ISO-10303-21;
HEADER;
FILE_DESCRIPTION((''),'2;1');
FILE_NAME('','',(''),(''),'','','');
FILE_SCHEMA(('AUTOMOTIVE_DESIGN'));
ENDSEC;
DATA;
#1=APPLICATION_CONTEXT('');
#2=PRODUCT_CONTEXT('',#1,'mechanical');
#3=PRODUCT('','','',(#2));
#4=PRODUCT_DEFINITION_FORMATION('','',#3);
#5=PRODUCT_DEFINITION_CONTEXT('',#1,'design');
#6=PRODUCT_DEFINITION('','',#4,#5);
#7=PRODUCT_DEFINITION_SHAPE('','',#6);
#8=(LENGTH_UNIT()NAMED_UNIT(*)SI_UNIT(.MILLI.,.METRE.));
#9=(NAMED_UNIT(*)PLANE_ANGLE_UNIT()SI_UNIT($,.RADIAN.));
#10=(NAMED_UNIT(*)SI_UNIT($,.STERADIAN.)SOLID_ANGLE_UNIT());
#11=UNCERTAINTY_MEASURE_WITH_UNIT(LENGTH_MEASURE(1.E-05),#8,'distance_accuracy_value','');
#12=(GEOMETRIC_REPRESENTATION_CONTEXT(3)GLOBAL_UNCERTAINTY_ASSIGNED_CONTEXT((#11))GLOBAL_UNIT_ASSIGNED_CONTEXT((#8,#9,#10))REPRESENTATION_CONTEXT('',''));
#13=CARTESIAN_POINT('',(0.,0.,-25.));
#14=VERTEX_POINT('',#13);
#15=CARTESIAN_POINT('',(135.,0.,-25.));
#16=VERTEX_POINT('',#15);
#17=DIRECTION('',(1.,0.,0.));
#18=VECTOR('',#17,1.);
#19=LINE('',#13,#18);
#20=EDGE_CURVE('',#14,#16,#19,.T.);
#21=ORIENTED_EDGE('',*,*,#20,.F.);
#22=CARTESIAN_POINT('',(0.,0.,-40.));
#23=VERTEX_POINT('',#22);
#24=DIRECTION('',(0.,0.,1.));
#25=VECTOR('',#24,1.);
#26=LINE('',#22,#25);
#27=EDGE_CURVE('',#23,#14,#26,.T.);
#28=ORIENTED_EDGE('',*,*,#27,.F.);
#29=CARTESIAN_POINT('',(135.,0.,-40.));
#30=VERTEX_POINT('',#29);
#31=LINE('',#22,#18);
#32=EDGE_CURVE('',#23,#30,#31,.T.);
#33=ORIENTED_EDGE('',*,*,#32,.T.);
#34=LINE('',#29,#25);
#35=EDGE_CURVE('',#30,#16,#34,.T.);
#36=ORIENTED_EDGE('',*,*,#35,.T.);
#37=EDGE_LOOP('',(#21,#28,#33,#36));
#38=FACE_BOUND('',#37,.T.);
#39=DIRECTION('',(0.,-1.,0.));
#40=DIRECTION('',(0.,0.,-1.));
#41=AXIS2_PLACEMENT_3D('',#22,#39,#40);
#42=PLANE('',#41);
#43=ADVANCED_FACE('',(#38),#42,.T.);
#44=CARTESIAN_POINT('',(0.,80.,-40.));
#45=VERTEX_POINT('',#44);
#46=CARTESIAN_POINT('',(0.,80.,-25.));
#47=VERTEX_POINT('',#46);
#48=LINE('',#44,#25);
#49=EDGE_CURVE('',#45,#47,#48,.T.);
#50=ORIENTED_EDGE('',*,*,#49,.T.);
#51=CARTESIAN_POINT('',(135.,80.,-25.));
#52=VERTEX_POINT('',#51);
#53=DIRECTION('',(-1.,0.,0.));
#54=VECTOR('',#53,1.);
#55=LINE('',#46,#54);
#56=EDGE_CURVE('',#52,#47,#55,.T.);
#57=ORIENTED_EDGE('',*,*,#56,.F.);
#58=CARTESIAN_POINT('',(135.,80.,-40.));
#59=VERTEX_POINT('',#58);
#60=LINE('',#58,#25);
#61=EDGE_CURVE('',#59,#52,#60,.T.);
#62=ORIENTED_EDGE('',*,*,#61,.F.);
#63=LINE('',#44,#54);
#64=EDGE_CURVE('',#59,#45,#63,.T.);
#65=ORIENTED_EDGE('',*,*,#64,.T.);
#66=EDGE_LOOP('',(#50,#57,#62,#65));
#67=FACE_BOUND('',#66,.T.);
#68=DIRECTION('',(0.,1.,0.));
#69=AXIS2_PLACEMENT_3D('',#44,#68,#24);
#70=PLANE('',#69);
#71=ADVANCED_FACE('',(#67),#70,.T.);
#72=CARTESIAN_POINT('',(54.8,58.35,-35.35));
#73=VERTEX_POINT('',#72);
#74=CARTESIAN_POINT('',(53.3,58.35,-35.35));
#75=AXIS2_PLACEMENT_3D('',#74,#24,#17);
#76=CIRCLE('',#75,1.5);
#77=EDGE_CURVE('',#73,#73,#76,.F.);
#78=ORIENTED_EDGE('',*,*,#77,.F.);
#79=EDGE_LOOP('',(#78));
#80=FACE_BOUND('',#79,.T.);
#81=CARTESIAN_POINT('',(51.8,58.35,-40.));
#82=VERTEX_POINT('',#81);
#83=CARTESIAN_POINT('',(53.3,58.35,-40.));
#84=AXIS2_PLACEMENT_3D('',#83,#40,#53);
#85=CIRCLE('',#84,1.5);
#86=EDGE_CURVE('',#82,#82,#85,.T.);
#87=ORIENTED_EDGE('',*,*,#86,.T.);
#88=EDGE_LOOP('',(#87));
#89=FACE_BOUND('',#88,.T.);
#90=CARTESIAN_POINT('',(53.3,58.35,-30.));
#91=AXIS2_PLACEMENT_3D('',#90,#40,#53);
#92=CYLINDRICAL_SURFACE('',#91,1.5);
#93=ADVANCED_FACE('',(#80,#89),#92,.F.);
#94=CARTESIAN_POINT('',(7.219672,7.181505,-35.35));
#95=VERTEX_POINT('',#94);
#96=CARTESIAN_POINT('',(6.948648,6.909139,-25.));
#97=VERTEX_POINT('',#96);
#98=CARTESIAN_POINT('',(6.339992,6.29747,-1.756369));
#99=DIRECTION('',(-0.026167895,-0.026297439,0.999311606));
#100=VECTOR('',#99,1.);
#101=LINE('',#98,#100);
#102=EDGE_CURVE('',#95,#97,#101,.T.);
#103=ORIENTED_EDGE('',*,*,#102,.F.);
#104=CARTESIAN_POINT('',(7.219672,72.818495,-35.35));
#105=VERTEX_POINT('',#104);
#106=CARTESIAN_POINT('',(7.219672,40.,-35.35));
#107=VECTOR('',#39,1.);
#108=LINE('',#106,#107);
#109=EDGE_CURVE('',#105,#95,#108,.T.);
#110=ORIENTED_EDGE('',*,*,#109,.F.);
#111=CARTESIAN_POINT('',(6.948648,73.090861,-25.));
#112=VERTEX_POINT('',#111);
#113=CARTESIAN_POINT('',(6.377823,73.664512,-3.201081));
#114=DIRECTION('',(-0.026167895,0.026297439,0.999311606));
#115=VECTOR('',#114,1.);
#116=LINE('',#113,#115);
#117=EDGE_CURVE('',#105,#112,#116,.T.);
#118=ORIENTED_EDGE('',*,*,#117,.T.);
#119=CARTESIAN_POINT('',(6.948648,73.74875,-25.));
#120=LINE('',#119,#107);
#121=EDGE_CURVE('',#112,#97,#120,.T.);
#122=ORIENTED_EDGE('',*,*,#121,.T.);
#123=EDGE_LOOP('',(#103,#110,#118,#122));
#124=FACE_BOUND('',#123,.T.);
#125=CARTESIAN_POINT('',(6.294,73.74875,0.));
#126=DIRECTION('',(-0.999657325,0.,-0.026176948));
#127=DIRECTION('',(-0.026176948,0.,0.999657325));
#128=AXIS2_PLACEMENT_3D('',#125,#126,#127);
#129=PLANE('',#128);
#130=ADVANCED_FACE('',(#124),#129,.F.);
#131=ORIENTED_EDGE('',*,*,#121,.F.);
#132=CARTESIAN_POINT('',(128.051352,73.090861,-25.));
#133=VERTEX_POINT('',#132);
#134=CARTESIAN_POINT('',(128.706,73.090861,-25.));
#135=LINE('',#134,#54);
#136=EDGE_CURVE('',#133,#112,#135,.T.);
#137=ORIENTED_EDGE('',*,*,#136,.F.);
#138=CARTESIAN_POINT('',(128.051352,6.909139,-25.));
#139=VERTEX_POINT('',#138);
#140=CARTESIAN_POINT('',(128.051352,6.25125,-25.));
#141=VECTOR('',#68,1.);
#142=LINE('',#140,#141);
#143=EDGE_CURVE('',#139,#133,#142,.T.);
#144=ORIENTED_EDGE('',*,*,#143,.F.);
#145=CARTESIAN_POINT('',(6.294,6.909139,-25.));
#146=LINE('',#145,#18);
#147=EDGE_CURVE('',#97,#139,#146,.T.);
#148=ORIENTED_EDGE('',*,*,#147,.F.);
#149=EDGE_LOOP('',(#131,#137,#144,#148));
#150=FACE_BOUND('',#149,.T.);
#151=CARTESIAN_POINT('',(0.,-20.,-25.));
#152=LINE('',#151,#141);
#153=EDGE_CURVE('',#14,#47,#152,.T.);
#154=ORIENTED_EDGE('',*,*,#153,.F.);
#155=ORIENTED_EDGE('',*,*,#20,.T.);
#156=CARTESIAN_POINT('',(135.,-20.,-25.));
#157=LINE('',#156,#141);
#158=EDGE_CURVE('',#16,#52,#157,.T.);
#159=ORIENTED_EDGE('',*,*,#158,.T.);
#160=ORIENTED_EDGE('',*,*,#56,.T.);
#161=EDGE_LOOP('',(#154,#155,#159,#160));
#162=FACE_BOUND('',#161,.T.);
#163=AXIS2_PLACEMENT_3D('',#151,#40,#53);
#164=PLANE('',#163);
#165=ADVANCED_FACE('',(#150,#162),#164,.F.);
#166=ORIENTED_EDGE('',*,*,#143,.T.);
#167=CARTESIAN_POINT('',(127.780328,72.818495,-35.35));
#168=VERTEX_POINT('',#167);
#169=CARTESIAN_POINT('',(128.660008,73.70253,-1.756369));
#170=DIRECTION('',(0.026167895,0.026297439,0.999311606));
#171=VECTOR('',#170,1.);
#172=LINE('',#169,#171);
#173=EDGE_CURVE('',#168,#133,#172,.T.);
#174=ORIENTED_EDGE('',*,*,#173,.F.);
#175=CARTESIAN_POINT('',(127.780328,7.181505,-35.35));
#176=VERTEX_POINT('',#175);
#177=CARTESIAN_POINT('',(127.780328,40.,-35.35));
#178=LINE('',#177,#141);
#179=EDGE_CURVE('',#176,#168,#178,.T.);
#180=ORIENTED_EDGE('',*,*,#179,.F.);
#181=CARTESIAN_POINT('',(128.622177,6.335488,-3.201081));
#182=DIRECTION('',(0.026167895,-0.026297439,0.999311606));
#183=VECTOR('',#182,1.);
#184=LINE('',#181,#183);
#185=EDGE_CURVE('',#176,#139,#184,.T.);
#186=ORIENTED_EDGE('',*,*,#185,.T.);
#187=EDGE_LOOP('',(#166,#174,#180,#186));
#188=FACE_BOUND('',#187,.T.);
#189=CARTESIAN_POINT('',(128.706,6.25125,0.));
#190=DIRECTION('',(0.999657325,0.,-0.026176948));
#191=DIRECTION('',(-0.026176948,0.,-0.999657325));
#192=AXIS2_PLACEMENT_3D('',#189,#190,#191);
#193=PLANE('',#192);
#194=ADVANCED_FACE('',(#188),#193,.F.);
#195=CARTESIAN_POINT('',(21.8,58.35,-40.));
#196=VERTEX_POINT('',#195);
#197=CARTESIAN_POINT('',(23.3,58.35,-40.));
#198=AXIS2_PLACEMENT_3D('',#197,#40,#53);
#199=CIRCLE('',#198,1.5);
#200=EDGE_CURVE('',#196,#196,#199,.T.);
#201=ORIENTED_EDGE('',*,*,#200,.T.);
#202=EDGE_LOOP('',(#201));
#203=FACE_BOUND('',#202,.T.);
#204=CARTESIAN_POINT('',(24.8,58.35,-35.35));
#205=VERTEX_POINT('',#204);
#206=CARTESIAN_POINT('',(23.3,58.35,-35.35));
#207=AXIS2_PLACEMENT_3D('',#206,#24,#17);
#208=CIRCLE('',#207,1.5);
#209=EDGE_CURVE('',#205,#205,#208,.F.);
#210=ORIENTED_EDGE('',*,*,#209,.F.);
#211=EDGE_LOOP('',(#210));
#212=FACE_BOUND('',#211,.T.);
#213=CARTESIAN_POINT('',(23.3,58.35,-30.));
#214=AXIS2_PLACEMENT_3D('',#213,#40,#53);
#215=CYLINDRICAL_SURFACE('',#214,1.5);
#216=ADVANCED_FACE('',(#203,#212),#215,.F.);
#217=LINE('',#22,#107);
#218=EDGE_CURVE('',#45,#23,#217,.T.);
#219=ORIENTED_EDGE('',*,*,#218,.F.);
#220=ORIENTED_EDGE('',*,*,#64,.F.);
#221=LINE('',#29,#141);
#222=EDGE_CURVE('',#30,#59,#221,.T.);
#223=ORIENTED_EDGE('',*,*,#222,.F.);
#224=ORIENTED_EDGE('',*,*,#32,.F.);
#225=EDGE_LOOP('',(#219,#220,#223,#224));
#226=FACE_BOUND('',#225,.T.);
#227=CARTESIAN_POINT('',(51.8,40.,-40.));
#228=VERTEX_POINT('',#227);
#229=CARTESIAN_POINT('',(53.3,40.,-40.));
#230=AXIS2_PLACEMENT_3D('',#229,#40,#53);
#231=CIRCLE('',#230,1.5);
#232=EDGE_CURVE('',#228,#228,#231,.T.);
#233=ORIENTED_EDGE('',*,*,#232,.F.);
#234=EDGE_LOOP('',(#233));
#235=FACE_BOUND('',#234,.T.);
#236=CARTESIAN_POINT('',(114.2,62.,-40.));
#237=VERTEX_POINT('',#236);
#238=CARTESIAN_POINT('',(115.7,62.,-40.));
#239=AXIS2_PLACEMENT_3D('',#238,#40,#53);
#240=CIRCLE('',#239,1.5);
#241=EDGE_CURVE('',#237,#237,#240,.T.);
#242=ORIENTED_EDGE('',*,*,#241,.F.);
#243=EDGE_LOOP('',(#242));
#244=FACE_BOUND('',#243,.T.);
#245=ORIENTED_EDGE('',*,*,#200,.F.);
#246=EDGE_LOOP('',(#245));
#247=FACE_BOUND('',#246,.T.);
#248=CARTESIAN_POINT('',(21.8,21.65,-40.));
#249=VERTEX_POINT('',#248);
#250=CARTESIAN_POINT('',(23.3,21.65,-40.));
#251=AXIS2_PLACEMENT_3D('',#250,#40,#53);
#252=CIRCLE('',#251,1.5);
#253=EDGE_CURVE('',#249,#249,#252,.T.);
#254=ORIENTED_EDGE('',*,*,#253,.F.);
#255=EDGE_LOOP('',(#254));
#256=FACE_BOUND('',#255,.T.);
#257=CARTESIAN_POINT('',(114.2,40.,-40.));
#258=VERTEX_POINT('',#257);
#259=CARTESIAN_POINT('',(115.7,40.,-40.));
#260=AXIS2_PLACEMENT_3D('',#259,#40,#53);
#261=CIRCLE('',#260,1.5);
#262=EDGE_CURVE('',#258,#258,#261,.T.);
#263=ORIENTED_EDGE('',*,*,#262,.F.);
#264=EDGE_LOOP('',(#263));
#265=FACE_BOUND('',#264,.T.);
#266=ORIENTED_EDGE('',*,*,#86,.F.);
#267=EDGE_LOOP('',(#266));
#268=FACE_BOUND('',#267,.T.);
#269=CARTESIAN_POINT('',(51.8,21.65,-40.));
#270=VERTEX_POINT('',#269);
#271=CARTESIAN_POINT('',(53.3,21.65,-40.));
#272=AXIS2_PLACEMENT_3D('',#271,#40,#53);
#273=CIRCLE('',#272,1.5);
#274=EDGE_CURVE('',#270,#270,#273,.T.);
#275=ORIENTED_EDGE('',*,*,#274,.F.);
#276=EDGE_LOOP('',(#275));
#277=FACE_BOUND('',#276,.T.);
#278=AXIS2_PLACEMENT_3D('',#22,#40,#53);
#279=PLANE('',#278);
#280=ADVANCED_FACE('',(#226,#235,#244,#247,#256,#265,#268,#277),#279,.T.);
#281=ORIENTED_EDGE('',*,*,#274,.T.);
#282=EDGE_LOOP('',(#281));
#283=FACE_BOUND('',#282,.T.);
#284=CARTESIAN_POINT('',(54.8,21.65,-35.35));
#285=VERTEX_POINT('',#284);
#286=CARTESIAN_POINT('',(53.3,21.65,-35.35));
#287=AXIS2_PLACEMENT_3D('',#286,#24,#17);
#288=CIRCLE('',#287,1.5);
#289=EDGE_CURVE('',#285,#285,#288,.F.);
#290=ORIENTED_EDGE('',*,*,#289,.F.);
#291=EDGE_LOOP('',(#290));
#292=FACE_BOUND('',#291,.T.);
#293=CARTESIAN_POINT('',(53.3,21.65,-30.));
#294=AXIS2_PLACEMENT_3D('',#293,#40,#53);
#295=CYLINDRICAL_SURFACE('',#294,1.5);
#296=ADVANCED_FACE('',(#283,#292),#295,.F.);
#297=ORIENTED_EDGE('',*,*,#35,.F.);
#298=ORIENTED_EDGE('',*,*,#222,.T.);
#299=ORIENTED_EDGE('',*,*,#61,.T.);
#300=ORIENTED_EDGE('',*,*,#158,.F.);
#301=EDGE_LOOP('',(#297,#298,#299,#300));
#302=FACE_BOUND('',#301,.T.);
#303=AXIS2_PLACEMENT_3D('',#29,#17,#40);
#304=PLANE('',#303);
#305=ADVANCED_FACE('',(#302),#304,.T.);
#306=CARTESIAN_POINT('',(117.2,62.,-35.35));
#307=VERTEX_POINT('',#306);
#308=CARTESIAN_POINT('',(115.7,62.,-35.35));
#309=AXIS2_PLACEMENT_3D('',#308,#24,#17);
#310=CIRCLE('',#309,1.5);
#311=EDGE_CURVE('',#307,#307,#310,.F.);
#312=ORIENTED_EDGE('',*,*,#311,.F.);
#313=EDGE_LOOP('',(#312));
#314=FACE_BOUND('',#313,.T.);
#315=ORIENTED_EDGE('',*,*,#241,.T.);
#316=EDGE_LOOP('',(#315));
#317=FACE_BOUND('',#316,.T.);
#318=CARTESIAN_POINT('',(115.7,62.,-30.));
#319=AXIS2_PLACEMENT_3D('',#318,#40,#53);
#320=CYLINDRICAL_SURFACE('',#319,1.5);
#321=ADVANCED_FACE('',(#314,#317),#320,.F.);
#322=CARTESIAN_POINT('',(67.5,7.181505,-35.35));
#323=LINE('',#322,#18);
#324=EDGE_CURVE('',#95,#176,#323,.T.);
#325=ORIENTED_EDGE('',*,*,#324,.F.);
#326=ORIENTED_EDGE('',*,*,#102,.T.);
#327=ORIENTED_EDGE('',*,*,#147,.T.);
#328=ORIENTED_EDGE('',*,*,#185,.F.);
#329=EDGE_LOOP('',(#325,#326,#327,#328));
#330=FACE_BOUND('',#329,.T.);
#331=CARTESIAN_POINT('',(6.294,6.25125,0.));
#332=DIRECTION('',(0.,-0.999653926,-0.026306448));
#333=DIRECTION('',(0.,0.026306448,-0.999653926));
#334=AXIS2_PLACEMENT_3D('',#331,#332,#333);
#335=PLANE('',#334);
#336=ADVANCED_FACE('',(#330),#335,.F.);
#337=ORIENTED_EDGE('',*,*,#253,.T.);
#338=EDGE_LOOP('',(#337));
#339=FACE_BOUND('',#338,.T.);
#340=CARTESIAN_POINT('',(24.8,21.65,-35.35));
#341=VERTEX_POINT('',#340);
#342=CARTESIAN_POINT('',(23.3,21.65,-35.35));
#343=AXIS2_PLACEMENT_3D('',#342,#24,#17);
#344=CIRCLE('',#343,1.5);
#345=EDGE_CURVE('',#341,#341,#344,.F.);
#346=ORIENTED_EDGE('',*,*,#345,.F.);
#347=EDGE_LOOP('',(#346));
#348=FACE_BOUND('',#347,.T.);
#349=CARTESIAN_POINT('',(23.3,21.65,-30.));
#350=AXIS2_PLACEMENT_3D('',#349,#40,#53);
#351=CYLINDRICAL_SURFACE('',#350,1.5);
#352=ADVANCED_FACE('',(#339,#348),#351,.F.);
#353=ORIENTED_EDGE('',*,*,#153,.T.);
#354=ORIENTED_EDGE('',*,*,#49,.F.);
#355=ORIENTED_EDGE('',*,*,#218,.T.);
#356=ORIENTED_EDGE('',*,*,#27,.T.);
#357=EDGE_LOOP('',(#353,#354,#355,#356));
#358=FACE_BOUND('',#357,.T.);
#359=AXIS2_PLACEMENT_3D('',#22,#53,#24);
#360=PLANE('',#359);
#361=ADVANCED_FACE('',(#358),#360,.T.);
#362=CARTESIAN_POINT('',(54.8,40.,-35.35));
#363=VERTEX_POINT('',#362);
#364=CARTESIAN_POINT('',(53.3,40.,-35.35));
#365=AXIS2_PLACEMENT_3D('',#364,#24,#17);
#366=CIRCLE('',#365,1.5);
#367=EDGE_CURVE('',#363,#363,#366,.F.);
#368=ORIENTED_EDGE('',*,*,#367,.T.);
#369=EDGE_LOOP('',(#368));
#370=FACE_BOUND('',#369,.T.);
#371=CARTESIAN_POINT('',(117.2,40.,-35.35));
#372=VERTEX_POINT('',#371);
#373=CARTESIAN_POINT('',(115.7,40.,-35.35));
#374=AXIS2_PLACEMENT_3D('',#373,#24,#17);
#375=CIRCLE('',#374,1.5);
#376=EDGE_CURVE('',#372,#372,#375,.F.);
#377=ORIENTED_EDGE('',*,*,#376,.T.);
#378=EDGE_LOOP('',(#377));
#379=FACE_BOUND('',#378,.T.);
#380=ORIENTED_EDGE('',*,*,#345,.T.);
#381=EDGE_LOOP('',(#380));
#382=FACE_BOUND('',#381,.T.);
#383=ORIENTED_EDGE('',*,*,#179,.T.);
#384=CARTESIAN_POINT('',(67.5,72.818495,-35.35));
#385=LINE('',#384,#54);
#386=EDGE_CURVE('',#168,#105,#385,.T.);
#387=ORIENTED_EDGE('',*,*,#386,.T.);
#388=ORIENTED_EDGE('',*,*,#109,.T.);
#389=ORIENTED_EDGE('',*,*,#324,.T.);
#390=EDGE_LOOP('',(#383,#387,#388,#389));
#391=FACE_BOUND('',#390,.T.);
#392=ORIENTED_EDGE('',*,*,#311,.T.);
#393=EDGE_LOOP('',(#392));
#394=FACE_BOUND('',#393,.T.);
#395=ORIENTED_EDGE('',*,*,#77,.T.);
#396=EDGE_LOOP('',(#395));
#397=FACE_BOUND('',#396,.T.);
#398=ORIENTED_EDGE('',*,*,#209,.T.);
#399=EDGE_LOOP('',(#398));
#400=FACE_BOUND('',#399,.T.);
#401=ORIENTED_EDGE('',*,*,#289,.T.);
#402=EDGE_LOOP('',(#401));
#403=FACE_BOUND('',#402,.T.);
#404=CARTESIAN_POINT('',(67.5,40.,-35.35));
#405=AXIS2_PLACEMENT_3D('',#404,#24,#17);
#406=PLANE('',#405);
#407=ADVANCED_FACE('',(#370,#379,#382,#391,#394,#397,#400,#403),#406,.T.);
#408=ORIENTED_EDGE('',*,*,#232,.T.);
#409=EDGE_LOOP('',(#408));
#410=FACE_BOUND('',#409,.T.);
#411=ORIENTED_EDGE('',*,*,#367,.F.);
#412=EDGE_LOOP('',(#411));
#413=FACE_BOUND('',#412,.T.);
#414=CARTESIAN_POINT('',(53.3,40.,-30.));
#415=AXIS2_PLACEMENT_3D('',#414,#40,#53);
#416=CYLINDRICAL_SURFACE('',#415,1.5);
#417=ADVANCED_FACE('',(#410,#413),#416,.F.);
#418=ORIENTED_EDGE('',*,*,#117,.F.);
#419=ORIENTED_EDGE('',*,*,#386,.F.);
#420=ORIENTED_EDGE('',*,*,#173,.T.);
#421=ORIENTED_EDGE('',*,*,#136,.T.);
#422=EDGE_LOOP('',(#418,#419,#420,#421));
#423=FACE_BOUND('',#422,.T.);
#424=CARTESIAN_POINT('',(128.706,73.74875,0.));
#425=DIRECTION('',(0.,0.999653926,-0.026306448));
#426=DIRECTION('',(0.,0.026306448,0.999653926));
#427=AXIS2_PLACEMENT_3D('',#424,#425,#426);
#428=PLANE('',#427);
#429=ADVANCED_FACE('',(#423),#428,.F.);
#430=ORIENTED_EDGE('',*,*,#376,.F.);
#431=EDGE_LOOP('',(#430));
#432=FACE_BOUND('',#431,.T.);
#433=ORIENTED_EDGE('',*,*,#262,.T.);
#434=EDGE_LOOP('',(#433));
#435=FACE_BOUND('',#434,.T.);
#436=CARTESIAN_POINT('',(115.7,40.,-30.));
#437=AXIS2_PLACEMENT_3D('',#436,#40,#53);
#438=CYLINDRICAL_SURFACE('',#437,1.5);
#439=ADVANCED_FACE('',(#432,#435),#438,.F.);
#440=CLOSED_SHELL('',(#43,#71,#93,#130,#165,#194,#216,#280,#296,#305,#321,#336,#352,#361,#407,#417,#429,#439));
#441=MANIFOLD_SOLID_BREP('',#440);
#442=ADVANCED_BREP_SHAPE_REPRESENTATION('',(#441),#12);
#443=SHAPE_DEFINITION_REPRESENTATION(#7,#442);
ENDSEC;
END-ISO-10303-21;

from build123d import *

# Parameters (mm, degrees)
SKETCH1_W           = 135
SKETCH1_H           = 80
BOSS_EXTRUDE1_DEPTH = 40
SKETCH2_R           = 1.5
CUT_EXTRUDE1_DEPTH  = 10
SKETCH4_W           = 135
SKETCH4_H           = 25
CUT_EXTRUDE2_DEPTH  = 100


with BuildPart() as part:
    # Sketch1 → Boss-Extrude1 (new body)
    with BuildSketch(Plane.XY):
        with Locations((67.5, 40)):
            Rectangle(SKETCH1_W, SKETCH1_H)
    extrude(amount=-BOSS_EXTRUDE1_DEPTH)

    # Sketch2 → Cut-Extrude1 (cut)
    with BuildSketch(Plane(origin=(0, 0, -40), x_dir=(-1, 0, 0), z_dir=(0, 0, -1))):
        with Locations((-53.3, 40)):
            Circle(SKETCH2_R)
        with Locations((-53.3, 58.35)):
            Circle(SKETCH2_R)
        with Locations((-53.3, 21.65)):
            Circle(SKETCH2_R)
        with Locations((-23.3, 58.35)):
            Circle(SKETCH2_R)
        with Locations((-23.3, 21.65)):
            Circle(SKETCH2_R)
        with Locations((-115.7, 40)):
            Circle(SKETCH2_R)
        with Locations((-115.7, 62)):
            Circle(SKETCH2_R)
    extrude(amount=-CUT_EXTRUDE1_DEPTH, mode=Mode.SUBTRACT)

    # Cavity1: read off the stored shape, not the designer's step
    # Cavity1: loft between two sections, ruled curve by curve
    cavity1_from = [
        Edge.make_line((128.706, 6.25125, 0), (128.706, 73.74875, 0)),
        Edge.make_line((6.294, 6.25125, 0), (128.706, 6.25125, 0)),
        Edge.make_line((6.294, 73.74875, 0), (6.294, 6.25125, 0)),
        Edge.make_line((128.706, 73.74875, 0), (6.294, 73.74875, 0)),
    ]
    cavity1_to = [
        Edge.make_line((127.780327673, 7.181504864, -35.35), (127.780327673, 72.818495136, -35.35)),
        Edge.make_line((7.219672327, 7.181504864, -35.35), (127.780327673, 7.181504864, -35.35)),
        Edge.make_line((7.219672327, 72.818495136, -35.35), (7.219672327, 7.181504864, -35.35)),
        Edge.make_line((127.780327673, 72.818495136, -35.35), (7.219672327, 72.818495136, -35.35)),
    ]
    cavity1 = Solid(Shell([*[Face.make_surface_from_curves(cavity1_from[k], cavity1_to[k]) for k in range(4)], Face(Wire(cavity1_from)), Face(Wire(cavity1_to))]))
    add(cavity1, mode=Mode.SUBTRACT)

    # Sketch4 → Cut-Extrude2 (cut)
    with BuildSketch(Plane(origin=(0, 80, 0), x_dir=(1, 0, 0), z_dir=(0, 1, 0))):
        with Locations((67.5, 12.5)):
            Rectangle(SKETCH4_W, SKETCH4_H)
    extrude(amount=-CUT_EXTRUDE2_DEPTH, mode=Mode.SUBTRACT)


solid = part.part
